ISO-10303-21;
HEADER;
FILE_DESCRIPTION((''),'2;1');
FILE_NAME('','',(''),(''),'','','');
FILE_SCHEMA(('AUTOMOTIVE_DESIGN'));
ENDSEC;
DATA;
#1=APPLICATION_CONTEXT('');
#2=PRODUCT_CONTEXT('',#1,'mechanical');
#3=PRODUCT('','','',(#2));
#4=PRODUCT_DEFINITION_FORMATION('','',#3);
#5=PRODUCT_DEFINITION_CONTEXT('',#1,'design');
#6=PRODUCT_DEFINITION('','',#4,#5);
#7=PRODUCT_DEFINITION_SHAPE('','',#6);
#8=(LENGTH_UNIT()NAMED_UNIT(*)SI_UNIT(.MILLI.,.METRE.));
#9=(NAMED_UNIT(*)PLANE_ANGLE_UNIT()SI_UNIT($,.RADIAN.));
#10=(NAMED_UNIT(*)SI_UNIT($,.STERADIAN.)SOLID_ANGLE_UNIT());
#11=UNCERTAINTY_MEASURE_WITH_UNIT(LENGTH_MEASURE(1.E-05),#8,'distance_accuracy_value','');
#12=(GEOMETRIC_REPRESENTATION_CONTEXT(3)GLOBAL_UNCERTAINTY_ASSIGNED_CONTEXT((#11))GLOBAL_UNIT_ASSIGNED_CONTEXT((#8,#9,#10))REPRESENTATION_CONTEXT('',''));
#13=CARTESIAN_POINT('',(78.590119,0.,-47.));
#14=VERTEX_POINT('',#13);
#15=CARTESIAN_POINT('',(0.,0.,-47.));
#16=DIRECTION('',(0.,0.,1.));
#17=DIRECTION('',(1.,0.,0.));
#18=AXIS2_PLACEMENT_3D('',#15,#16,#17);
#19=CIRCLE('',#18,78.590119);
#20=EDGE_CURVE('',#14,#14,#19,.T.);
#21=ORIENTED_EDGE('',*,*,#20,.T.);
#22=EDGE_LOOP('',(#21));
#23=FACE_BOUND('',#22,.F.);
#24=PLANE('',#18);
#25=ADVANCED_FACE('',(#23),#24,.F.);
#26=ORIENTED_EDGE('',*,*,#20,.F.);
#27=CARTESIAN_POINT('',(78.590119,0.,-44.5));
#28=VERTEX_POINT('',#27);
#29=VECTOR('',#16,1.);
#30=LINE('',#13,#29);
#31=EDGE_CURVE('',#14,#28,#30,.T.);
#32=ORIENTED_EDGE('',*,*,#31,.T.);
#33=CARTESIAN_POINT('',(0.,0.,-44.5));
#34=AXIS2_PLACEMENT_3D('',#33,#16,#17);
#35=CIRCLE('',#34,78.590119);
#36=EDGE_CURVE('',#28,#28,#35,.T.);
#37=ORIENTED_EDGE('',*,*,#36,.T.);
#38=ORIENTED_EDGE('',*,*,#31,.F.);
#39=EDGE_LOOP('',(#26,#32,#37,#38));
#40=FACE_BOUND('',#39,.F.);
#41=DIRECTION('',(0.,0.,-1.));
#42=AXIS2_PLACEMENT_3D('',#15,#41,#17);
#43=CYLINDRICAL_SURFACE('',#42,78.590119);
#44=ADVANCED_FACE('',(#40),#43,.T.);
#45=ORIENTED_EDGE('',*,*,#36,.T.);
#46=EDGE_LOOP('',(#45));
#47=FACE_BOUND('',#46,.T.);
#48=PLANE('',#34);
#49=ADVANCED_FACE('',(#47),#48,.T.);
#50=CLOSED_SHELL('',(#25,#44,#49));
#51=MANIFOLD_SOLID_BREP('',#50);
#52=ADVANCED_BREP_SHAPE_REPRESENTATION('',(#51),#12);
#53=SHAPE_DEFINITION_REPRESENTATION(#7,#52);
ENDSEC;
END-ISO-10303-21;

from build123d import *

# Parameters (mm, degrees)
F6_R     = 78.5901187679
F7_DEPTH = 2.5


# Not quite as in the source:
# - a feature of the source that left no trace in its solid (it failed there, or was rolled back) is left out
# - the program builds the solid bodies; features that only make, move or delete a surface that nothing else refers to are left out


with BuildPart() as f7:
    # F6 (on offset) → F7 (new body)
    with BuildSketch(Plane.XY.offset(-47)):
        Circle(F6_R)
    extrude(amount=F7_DEPTH)


solid = f7.part
